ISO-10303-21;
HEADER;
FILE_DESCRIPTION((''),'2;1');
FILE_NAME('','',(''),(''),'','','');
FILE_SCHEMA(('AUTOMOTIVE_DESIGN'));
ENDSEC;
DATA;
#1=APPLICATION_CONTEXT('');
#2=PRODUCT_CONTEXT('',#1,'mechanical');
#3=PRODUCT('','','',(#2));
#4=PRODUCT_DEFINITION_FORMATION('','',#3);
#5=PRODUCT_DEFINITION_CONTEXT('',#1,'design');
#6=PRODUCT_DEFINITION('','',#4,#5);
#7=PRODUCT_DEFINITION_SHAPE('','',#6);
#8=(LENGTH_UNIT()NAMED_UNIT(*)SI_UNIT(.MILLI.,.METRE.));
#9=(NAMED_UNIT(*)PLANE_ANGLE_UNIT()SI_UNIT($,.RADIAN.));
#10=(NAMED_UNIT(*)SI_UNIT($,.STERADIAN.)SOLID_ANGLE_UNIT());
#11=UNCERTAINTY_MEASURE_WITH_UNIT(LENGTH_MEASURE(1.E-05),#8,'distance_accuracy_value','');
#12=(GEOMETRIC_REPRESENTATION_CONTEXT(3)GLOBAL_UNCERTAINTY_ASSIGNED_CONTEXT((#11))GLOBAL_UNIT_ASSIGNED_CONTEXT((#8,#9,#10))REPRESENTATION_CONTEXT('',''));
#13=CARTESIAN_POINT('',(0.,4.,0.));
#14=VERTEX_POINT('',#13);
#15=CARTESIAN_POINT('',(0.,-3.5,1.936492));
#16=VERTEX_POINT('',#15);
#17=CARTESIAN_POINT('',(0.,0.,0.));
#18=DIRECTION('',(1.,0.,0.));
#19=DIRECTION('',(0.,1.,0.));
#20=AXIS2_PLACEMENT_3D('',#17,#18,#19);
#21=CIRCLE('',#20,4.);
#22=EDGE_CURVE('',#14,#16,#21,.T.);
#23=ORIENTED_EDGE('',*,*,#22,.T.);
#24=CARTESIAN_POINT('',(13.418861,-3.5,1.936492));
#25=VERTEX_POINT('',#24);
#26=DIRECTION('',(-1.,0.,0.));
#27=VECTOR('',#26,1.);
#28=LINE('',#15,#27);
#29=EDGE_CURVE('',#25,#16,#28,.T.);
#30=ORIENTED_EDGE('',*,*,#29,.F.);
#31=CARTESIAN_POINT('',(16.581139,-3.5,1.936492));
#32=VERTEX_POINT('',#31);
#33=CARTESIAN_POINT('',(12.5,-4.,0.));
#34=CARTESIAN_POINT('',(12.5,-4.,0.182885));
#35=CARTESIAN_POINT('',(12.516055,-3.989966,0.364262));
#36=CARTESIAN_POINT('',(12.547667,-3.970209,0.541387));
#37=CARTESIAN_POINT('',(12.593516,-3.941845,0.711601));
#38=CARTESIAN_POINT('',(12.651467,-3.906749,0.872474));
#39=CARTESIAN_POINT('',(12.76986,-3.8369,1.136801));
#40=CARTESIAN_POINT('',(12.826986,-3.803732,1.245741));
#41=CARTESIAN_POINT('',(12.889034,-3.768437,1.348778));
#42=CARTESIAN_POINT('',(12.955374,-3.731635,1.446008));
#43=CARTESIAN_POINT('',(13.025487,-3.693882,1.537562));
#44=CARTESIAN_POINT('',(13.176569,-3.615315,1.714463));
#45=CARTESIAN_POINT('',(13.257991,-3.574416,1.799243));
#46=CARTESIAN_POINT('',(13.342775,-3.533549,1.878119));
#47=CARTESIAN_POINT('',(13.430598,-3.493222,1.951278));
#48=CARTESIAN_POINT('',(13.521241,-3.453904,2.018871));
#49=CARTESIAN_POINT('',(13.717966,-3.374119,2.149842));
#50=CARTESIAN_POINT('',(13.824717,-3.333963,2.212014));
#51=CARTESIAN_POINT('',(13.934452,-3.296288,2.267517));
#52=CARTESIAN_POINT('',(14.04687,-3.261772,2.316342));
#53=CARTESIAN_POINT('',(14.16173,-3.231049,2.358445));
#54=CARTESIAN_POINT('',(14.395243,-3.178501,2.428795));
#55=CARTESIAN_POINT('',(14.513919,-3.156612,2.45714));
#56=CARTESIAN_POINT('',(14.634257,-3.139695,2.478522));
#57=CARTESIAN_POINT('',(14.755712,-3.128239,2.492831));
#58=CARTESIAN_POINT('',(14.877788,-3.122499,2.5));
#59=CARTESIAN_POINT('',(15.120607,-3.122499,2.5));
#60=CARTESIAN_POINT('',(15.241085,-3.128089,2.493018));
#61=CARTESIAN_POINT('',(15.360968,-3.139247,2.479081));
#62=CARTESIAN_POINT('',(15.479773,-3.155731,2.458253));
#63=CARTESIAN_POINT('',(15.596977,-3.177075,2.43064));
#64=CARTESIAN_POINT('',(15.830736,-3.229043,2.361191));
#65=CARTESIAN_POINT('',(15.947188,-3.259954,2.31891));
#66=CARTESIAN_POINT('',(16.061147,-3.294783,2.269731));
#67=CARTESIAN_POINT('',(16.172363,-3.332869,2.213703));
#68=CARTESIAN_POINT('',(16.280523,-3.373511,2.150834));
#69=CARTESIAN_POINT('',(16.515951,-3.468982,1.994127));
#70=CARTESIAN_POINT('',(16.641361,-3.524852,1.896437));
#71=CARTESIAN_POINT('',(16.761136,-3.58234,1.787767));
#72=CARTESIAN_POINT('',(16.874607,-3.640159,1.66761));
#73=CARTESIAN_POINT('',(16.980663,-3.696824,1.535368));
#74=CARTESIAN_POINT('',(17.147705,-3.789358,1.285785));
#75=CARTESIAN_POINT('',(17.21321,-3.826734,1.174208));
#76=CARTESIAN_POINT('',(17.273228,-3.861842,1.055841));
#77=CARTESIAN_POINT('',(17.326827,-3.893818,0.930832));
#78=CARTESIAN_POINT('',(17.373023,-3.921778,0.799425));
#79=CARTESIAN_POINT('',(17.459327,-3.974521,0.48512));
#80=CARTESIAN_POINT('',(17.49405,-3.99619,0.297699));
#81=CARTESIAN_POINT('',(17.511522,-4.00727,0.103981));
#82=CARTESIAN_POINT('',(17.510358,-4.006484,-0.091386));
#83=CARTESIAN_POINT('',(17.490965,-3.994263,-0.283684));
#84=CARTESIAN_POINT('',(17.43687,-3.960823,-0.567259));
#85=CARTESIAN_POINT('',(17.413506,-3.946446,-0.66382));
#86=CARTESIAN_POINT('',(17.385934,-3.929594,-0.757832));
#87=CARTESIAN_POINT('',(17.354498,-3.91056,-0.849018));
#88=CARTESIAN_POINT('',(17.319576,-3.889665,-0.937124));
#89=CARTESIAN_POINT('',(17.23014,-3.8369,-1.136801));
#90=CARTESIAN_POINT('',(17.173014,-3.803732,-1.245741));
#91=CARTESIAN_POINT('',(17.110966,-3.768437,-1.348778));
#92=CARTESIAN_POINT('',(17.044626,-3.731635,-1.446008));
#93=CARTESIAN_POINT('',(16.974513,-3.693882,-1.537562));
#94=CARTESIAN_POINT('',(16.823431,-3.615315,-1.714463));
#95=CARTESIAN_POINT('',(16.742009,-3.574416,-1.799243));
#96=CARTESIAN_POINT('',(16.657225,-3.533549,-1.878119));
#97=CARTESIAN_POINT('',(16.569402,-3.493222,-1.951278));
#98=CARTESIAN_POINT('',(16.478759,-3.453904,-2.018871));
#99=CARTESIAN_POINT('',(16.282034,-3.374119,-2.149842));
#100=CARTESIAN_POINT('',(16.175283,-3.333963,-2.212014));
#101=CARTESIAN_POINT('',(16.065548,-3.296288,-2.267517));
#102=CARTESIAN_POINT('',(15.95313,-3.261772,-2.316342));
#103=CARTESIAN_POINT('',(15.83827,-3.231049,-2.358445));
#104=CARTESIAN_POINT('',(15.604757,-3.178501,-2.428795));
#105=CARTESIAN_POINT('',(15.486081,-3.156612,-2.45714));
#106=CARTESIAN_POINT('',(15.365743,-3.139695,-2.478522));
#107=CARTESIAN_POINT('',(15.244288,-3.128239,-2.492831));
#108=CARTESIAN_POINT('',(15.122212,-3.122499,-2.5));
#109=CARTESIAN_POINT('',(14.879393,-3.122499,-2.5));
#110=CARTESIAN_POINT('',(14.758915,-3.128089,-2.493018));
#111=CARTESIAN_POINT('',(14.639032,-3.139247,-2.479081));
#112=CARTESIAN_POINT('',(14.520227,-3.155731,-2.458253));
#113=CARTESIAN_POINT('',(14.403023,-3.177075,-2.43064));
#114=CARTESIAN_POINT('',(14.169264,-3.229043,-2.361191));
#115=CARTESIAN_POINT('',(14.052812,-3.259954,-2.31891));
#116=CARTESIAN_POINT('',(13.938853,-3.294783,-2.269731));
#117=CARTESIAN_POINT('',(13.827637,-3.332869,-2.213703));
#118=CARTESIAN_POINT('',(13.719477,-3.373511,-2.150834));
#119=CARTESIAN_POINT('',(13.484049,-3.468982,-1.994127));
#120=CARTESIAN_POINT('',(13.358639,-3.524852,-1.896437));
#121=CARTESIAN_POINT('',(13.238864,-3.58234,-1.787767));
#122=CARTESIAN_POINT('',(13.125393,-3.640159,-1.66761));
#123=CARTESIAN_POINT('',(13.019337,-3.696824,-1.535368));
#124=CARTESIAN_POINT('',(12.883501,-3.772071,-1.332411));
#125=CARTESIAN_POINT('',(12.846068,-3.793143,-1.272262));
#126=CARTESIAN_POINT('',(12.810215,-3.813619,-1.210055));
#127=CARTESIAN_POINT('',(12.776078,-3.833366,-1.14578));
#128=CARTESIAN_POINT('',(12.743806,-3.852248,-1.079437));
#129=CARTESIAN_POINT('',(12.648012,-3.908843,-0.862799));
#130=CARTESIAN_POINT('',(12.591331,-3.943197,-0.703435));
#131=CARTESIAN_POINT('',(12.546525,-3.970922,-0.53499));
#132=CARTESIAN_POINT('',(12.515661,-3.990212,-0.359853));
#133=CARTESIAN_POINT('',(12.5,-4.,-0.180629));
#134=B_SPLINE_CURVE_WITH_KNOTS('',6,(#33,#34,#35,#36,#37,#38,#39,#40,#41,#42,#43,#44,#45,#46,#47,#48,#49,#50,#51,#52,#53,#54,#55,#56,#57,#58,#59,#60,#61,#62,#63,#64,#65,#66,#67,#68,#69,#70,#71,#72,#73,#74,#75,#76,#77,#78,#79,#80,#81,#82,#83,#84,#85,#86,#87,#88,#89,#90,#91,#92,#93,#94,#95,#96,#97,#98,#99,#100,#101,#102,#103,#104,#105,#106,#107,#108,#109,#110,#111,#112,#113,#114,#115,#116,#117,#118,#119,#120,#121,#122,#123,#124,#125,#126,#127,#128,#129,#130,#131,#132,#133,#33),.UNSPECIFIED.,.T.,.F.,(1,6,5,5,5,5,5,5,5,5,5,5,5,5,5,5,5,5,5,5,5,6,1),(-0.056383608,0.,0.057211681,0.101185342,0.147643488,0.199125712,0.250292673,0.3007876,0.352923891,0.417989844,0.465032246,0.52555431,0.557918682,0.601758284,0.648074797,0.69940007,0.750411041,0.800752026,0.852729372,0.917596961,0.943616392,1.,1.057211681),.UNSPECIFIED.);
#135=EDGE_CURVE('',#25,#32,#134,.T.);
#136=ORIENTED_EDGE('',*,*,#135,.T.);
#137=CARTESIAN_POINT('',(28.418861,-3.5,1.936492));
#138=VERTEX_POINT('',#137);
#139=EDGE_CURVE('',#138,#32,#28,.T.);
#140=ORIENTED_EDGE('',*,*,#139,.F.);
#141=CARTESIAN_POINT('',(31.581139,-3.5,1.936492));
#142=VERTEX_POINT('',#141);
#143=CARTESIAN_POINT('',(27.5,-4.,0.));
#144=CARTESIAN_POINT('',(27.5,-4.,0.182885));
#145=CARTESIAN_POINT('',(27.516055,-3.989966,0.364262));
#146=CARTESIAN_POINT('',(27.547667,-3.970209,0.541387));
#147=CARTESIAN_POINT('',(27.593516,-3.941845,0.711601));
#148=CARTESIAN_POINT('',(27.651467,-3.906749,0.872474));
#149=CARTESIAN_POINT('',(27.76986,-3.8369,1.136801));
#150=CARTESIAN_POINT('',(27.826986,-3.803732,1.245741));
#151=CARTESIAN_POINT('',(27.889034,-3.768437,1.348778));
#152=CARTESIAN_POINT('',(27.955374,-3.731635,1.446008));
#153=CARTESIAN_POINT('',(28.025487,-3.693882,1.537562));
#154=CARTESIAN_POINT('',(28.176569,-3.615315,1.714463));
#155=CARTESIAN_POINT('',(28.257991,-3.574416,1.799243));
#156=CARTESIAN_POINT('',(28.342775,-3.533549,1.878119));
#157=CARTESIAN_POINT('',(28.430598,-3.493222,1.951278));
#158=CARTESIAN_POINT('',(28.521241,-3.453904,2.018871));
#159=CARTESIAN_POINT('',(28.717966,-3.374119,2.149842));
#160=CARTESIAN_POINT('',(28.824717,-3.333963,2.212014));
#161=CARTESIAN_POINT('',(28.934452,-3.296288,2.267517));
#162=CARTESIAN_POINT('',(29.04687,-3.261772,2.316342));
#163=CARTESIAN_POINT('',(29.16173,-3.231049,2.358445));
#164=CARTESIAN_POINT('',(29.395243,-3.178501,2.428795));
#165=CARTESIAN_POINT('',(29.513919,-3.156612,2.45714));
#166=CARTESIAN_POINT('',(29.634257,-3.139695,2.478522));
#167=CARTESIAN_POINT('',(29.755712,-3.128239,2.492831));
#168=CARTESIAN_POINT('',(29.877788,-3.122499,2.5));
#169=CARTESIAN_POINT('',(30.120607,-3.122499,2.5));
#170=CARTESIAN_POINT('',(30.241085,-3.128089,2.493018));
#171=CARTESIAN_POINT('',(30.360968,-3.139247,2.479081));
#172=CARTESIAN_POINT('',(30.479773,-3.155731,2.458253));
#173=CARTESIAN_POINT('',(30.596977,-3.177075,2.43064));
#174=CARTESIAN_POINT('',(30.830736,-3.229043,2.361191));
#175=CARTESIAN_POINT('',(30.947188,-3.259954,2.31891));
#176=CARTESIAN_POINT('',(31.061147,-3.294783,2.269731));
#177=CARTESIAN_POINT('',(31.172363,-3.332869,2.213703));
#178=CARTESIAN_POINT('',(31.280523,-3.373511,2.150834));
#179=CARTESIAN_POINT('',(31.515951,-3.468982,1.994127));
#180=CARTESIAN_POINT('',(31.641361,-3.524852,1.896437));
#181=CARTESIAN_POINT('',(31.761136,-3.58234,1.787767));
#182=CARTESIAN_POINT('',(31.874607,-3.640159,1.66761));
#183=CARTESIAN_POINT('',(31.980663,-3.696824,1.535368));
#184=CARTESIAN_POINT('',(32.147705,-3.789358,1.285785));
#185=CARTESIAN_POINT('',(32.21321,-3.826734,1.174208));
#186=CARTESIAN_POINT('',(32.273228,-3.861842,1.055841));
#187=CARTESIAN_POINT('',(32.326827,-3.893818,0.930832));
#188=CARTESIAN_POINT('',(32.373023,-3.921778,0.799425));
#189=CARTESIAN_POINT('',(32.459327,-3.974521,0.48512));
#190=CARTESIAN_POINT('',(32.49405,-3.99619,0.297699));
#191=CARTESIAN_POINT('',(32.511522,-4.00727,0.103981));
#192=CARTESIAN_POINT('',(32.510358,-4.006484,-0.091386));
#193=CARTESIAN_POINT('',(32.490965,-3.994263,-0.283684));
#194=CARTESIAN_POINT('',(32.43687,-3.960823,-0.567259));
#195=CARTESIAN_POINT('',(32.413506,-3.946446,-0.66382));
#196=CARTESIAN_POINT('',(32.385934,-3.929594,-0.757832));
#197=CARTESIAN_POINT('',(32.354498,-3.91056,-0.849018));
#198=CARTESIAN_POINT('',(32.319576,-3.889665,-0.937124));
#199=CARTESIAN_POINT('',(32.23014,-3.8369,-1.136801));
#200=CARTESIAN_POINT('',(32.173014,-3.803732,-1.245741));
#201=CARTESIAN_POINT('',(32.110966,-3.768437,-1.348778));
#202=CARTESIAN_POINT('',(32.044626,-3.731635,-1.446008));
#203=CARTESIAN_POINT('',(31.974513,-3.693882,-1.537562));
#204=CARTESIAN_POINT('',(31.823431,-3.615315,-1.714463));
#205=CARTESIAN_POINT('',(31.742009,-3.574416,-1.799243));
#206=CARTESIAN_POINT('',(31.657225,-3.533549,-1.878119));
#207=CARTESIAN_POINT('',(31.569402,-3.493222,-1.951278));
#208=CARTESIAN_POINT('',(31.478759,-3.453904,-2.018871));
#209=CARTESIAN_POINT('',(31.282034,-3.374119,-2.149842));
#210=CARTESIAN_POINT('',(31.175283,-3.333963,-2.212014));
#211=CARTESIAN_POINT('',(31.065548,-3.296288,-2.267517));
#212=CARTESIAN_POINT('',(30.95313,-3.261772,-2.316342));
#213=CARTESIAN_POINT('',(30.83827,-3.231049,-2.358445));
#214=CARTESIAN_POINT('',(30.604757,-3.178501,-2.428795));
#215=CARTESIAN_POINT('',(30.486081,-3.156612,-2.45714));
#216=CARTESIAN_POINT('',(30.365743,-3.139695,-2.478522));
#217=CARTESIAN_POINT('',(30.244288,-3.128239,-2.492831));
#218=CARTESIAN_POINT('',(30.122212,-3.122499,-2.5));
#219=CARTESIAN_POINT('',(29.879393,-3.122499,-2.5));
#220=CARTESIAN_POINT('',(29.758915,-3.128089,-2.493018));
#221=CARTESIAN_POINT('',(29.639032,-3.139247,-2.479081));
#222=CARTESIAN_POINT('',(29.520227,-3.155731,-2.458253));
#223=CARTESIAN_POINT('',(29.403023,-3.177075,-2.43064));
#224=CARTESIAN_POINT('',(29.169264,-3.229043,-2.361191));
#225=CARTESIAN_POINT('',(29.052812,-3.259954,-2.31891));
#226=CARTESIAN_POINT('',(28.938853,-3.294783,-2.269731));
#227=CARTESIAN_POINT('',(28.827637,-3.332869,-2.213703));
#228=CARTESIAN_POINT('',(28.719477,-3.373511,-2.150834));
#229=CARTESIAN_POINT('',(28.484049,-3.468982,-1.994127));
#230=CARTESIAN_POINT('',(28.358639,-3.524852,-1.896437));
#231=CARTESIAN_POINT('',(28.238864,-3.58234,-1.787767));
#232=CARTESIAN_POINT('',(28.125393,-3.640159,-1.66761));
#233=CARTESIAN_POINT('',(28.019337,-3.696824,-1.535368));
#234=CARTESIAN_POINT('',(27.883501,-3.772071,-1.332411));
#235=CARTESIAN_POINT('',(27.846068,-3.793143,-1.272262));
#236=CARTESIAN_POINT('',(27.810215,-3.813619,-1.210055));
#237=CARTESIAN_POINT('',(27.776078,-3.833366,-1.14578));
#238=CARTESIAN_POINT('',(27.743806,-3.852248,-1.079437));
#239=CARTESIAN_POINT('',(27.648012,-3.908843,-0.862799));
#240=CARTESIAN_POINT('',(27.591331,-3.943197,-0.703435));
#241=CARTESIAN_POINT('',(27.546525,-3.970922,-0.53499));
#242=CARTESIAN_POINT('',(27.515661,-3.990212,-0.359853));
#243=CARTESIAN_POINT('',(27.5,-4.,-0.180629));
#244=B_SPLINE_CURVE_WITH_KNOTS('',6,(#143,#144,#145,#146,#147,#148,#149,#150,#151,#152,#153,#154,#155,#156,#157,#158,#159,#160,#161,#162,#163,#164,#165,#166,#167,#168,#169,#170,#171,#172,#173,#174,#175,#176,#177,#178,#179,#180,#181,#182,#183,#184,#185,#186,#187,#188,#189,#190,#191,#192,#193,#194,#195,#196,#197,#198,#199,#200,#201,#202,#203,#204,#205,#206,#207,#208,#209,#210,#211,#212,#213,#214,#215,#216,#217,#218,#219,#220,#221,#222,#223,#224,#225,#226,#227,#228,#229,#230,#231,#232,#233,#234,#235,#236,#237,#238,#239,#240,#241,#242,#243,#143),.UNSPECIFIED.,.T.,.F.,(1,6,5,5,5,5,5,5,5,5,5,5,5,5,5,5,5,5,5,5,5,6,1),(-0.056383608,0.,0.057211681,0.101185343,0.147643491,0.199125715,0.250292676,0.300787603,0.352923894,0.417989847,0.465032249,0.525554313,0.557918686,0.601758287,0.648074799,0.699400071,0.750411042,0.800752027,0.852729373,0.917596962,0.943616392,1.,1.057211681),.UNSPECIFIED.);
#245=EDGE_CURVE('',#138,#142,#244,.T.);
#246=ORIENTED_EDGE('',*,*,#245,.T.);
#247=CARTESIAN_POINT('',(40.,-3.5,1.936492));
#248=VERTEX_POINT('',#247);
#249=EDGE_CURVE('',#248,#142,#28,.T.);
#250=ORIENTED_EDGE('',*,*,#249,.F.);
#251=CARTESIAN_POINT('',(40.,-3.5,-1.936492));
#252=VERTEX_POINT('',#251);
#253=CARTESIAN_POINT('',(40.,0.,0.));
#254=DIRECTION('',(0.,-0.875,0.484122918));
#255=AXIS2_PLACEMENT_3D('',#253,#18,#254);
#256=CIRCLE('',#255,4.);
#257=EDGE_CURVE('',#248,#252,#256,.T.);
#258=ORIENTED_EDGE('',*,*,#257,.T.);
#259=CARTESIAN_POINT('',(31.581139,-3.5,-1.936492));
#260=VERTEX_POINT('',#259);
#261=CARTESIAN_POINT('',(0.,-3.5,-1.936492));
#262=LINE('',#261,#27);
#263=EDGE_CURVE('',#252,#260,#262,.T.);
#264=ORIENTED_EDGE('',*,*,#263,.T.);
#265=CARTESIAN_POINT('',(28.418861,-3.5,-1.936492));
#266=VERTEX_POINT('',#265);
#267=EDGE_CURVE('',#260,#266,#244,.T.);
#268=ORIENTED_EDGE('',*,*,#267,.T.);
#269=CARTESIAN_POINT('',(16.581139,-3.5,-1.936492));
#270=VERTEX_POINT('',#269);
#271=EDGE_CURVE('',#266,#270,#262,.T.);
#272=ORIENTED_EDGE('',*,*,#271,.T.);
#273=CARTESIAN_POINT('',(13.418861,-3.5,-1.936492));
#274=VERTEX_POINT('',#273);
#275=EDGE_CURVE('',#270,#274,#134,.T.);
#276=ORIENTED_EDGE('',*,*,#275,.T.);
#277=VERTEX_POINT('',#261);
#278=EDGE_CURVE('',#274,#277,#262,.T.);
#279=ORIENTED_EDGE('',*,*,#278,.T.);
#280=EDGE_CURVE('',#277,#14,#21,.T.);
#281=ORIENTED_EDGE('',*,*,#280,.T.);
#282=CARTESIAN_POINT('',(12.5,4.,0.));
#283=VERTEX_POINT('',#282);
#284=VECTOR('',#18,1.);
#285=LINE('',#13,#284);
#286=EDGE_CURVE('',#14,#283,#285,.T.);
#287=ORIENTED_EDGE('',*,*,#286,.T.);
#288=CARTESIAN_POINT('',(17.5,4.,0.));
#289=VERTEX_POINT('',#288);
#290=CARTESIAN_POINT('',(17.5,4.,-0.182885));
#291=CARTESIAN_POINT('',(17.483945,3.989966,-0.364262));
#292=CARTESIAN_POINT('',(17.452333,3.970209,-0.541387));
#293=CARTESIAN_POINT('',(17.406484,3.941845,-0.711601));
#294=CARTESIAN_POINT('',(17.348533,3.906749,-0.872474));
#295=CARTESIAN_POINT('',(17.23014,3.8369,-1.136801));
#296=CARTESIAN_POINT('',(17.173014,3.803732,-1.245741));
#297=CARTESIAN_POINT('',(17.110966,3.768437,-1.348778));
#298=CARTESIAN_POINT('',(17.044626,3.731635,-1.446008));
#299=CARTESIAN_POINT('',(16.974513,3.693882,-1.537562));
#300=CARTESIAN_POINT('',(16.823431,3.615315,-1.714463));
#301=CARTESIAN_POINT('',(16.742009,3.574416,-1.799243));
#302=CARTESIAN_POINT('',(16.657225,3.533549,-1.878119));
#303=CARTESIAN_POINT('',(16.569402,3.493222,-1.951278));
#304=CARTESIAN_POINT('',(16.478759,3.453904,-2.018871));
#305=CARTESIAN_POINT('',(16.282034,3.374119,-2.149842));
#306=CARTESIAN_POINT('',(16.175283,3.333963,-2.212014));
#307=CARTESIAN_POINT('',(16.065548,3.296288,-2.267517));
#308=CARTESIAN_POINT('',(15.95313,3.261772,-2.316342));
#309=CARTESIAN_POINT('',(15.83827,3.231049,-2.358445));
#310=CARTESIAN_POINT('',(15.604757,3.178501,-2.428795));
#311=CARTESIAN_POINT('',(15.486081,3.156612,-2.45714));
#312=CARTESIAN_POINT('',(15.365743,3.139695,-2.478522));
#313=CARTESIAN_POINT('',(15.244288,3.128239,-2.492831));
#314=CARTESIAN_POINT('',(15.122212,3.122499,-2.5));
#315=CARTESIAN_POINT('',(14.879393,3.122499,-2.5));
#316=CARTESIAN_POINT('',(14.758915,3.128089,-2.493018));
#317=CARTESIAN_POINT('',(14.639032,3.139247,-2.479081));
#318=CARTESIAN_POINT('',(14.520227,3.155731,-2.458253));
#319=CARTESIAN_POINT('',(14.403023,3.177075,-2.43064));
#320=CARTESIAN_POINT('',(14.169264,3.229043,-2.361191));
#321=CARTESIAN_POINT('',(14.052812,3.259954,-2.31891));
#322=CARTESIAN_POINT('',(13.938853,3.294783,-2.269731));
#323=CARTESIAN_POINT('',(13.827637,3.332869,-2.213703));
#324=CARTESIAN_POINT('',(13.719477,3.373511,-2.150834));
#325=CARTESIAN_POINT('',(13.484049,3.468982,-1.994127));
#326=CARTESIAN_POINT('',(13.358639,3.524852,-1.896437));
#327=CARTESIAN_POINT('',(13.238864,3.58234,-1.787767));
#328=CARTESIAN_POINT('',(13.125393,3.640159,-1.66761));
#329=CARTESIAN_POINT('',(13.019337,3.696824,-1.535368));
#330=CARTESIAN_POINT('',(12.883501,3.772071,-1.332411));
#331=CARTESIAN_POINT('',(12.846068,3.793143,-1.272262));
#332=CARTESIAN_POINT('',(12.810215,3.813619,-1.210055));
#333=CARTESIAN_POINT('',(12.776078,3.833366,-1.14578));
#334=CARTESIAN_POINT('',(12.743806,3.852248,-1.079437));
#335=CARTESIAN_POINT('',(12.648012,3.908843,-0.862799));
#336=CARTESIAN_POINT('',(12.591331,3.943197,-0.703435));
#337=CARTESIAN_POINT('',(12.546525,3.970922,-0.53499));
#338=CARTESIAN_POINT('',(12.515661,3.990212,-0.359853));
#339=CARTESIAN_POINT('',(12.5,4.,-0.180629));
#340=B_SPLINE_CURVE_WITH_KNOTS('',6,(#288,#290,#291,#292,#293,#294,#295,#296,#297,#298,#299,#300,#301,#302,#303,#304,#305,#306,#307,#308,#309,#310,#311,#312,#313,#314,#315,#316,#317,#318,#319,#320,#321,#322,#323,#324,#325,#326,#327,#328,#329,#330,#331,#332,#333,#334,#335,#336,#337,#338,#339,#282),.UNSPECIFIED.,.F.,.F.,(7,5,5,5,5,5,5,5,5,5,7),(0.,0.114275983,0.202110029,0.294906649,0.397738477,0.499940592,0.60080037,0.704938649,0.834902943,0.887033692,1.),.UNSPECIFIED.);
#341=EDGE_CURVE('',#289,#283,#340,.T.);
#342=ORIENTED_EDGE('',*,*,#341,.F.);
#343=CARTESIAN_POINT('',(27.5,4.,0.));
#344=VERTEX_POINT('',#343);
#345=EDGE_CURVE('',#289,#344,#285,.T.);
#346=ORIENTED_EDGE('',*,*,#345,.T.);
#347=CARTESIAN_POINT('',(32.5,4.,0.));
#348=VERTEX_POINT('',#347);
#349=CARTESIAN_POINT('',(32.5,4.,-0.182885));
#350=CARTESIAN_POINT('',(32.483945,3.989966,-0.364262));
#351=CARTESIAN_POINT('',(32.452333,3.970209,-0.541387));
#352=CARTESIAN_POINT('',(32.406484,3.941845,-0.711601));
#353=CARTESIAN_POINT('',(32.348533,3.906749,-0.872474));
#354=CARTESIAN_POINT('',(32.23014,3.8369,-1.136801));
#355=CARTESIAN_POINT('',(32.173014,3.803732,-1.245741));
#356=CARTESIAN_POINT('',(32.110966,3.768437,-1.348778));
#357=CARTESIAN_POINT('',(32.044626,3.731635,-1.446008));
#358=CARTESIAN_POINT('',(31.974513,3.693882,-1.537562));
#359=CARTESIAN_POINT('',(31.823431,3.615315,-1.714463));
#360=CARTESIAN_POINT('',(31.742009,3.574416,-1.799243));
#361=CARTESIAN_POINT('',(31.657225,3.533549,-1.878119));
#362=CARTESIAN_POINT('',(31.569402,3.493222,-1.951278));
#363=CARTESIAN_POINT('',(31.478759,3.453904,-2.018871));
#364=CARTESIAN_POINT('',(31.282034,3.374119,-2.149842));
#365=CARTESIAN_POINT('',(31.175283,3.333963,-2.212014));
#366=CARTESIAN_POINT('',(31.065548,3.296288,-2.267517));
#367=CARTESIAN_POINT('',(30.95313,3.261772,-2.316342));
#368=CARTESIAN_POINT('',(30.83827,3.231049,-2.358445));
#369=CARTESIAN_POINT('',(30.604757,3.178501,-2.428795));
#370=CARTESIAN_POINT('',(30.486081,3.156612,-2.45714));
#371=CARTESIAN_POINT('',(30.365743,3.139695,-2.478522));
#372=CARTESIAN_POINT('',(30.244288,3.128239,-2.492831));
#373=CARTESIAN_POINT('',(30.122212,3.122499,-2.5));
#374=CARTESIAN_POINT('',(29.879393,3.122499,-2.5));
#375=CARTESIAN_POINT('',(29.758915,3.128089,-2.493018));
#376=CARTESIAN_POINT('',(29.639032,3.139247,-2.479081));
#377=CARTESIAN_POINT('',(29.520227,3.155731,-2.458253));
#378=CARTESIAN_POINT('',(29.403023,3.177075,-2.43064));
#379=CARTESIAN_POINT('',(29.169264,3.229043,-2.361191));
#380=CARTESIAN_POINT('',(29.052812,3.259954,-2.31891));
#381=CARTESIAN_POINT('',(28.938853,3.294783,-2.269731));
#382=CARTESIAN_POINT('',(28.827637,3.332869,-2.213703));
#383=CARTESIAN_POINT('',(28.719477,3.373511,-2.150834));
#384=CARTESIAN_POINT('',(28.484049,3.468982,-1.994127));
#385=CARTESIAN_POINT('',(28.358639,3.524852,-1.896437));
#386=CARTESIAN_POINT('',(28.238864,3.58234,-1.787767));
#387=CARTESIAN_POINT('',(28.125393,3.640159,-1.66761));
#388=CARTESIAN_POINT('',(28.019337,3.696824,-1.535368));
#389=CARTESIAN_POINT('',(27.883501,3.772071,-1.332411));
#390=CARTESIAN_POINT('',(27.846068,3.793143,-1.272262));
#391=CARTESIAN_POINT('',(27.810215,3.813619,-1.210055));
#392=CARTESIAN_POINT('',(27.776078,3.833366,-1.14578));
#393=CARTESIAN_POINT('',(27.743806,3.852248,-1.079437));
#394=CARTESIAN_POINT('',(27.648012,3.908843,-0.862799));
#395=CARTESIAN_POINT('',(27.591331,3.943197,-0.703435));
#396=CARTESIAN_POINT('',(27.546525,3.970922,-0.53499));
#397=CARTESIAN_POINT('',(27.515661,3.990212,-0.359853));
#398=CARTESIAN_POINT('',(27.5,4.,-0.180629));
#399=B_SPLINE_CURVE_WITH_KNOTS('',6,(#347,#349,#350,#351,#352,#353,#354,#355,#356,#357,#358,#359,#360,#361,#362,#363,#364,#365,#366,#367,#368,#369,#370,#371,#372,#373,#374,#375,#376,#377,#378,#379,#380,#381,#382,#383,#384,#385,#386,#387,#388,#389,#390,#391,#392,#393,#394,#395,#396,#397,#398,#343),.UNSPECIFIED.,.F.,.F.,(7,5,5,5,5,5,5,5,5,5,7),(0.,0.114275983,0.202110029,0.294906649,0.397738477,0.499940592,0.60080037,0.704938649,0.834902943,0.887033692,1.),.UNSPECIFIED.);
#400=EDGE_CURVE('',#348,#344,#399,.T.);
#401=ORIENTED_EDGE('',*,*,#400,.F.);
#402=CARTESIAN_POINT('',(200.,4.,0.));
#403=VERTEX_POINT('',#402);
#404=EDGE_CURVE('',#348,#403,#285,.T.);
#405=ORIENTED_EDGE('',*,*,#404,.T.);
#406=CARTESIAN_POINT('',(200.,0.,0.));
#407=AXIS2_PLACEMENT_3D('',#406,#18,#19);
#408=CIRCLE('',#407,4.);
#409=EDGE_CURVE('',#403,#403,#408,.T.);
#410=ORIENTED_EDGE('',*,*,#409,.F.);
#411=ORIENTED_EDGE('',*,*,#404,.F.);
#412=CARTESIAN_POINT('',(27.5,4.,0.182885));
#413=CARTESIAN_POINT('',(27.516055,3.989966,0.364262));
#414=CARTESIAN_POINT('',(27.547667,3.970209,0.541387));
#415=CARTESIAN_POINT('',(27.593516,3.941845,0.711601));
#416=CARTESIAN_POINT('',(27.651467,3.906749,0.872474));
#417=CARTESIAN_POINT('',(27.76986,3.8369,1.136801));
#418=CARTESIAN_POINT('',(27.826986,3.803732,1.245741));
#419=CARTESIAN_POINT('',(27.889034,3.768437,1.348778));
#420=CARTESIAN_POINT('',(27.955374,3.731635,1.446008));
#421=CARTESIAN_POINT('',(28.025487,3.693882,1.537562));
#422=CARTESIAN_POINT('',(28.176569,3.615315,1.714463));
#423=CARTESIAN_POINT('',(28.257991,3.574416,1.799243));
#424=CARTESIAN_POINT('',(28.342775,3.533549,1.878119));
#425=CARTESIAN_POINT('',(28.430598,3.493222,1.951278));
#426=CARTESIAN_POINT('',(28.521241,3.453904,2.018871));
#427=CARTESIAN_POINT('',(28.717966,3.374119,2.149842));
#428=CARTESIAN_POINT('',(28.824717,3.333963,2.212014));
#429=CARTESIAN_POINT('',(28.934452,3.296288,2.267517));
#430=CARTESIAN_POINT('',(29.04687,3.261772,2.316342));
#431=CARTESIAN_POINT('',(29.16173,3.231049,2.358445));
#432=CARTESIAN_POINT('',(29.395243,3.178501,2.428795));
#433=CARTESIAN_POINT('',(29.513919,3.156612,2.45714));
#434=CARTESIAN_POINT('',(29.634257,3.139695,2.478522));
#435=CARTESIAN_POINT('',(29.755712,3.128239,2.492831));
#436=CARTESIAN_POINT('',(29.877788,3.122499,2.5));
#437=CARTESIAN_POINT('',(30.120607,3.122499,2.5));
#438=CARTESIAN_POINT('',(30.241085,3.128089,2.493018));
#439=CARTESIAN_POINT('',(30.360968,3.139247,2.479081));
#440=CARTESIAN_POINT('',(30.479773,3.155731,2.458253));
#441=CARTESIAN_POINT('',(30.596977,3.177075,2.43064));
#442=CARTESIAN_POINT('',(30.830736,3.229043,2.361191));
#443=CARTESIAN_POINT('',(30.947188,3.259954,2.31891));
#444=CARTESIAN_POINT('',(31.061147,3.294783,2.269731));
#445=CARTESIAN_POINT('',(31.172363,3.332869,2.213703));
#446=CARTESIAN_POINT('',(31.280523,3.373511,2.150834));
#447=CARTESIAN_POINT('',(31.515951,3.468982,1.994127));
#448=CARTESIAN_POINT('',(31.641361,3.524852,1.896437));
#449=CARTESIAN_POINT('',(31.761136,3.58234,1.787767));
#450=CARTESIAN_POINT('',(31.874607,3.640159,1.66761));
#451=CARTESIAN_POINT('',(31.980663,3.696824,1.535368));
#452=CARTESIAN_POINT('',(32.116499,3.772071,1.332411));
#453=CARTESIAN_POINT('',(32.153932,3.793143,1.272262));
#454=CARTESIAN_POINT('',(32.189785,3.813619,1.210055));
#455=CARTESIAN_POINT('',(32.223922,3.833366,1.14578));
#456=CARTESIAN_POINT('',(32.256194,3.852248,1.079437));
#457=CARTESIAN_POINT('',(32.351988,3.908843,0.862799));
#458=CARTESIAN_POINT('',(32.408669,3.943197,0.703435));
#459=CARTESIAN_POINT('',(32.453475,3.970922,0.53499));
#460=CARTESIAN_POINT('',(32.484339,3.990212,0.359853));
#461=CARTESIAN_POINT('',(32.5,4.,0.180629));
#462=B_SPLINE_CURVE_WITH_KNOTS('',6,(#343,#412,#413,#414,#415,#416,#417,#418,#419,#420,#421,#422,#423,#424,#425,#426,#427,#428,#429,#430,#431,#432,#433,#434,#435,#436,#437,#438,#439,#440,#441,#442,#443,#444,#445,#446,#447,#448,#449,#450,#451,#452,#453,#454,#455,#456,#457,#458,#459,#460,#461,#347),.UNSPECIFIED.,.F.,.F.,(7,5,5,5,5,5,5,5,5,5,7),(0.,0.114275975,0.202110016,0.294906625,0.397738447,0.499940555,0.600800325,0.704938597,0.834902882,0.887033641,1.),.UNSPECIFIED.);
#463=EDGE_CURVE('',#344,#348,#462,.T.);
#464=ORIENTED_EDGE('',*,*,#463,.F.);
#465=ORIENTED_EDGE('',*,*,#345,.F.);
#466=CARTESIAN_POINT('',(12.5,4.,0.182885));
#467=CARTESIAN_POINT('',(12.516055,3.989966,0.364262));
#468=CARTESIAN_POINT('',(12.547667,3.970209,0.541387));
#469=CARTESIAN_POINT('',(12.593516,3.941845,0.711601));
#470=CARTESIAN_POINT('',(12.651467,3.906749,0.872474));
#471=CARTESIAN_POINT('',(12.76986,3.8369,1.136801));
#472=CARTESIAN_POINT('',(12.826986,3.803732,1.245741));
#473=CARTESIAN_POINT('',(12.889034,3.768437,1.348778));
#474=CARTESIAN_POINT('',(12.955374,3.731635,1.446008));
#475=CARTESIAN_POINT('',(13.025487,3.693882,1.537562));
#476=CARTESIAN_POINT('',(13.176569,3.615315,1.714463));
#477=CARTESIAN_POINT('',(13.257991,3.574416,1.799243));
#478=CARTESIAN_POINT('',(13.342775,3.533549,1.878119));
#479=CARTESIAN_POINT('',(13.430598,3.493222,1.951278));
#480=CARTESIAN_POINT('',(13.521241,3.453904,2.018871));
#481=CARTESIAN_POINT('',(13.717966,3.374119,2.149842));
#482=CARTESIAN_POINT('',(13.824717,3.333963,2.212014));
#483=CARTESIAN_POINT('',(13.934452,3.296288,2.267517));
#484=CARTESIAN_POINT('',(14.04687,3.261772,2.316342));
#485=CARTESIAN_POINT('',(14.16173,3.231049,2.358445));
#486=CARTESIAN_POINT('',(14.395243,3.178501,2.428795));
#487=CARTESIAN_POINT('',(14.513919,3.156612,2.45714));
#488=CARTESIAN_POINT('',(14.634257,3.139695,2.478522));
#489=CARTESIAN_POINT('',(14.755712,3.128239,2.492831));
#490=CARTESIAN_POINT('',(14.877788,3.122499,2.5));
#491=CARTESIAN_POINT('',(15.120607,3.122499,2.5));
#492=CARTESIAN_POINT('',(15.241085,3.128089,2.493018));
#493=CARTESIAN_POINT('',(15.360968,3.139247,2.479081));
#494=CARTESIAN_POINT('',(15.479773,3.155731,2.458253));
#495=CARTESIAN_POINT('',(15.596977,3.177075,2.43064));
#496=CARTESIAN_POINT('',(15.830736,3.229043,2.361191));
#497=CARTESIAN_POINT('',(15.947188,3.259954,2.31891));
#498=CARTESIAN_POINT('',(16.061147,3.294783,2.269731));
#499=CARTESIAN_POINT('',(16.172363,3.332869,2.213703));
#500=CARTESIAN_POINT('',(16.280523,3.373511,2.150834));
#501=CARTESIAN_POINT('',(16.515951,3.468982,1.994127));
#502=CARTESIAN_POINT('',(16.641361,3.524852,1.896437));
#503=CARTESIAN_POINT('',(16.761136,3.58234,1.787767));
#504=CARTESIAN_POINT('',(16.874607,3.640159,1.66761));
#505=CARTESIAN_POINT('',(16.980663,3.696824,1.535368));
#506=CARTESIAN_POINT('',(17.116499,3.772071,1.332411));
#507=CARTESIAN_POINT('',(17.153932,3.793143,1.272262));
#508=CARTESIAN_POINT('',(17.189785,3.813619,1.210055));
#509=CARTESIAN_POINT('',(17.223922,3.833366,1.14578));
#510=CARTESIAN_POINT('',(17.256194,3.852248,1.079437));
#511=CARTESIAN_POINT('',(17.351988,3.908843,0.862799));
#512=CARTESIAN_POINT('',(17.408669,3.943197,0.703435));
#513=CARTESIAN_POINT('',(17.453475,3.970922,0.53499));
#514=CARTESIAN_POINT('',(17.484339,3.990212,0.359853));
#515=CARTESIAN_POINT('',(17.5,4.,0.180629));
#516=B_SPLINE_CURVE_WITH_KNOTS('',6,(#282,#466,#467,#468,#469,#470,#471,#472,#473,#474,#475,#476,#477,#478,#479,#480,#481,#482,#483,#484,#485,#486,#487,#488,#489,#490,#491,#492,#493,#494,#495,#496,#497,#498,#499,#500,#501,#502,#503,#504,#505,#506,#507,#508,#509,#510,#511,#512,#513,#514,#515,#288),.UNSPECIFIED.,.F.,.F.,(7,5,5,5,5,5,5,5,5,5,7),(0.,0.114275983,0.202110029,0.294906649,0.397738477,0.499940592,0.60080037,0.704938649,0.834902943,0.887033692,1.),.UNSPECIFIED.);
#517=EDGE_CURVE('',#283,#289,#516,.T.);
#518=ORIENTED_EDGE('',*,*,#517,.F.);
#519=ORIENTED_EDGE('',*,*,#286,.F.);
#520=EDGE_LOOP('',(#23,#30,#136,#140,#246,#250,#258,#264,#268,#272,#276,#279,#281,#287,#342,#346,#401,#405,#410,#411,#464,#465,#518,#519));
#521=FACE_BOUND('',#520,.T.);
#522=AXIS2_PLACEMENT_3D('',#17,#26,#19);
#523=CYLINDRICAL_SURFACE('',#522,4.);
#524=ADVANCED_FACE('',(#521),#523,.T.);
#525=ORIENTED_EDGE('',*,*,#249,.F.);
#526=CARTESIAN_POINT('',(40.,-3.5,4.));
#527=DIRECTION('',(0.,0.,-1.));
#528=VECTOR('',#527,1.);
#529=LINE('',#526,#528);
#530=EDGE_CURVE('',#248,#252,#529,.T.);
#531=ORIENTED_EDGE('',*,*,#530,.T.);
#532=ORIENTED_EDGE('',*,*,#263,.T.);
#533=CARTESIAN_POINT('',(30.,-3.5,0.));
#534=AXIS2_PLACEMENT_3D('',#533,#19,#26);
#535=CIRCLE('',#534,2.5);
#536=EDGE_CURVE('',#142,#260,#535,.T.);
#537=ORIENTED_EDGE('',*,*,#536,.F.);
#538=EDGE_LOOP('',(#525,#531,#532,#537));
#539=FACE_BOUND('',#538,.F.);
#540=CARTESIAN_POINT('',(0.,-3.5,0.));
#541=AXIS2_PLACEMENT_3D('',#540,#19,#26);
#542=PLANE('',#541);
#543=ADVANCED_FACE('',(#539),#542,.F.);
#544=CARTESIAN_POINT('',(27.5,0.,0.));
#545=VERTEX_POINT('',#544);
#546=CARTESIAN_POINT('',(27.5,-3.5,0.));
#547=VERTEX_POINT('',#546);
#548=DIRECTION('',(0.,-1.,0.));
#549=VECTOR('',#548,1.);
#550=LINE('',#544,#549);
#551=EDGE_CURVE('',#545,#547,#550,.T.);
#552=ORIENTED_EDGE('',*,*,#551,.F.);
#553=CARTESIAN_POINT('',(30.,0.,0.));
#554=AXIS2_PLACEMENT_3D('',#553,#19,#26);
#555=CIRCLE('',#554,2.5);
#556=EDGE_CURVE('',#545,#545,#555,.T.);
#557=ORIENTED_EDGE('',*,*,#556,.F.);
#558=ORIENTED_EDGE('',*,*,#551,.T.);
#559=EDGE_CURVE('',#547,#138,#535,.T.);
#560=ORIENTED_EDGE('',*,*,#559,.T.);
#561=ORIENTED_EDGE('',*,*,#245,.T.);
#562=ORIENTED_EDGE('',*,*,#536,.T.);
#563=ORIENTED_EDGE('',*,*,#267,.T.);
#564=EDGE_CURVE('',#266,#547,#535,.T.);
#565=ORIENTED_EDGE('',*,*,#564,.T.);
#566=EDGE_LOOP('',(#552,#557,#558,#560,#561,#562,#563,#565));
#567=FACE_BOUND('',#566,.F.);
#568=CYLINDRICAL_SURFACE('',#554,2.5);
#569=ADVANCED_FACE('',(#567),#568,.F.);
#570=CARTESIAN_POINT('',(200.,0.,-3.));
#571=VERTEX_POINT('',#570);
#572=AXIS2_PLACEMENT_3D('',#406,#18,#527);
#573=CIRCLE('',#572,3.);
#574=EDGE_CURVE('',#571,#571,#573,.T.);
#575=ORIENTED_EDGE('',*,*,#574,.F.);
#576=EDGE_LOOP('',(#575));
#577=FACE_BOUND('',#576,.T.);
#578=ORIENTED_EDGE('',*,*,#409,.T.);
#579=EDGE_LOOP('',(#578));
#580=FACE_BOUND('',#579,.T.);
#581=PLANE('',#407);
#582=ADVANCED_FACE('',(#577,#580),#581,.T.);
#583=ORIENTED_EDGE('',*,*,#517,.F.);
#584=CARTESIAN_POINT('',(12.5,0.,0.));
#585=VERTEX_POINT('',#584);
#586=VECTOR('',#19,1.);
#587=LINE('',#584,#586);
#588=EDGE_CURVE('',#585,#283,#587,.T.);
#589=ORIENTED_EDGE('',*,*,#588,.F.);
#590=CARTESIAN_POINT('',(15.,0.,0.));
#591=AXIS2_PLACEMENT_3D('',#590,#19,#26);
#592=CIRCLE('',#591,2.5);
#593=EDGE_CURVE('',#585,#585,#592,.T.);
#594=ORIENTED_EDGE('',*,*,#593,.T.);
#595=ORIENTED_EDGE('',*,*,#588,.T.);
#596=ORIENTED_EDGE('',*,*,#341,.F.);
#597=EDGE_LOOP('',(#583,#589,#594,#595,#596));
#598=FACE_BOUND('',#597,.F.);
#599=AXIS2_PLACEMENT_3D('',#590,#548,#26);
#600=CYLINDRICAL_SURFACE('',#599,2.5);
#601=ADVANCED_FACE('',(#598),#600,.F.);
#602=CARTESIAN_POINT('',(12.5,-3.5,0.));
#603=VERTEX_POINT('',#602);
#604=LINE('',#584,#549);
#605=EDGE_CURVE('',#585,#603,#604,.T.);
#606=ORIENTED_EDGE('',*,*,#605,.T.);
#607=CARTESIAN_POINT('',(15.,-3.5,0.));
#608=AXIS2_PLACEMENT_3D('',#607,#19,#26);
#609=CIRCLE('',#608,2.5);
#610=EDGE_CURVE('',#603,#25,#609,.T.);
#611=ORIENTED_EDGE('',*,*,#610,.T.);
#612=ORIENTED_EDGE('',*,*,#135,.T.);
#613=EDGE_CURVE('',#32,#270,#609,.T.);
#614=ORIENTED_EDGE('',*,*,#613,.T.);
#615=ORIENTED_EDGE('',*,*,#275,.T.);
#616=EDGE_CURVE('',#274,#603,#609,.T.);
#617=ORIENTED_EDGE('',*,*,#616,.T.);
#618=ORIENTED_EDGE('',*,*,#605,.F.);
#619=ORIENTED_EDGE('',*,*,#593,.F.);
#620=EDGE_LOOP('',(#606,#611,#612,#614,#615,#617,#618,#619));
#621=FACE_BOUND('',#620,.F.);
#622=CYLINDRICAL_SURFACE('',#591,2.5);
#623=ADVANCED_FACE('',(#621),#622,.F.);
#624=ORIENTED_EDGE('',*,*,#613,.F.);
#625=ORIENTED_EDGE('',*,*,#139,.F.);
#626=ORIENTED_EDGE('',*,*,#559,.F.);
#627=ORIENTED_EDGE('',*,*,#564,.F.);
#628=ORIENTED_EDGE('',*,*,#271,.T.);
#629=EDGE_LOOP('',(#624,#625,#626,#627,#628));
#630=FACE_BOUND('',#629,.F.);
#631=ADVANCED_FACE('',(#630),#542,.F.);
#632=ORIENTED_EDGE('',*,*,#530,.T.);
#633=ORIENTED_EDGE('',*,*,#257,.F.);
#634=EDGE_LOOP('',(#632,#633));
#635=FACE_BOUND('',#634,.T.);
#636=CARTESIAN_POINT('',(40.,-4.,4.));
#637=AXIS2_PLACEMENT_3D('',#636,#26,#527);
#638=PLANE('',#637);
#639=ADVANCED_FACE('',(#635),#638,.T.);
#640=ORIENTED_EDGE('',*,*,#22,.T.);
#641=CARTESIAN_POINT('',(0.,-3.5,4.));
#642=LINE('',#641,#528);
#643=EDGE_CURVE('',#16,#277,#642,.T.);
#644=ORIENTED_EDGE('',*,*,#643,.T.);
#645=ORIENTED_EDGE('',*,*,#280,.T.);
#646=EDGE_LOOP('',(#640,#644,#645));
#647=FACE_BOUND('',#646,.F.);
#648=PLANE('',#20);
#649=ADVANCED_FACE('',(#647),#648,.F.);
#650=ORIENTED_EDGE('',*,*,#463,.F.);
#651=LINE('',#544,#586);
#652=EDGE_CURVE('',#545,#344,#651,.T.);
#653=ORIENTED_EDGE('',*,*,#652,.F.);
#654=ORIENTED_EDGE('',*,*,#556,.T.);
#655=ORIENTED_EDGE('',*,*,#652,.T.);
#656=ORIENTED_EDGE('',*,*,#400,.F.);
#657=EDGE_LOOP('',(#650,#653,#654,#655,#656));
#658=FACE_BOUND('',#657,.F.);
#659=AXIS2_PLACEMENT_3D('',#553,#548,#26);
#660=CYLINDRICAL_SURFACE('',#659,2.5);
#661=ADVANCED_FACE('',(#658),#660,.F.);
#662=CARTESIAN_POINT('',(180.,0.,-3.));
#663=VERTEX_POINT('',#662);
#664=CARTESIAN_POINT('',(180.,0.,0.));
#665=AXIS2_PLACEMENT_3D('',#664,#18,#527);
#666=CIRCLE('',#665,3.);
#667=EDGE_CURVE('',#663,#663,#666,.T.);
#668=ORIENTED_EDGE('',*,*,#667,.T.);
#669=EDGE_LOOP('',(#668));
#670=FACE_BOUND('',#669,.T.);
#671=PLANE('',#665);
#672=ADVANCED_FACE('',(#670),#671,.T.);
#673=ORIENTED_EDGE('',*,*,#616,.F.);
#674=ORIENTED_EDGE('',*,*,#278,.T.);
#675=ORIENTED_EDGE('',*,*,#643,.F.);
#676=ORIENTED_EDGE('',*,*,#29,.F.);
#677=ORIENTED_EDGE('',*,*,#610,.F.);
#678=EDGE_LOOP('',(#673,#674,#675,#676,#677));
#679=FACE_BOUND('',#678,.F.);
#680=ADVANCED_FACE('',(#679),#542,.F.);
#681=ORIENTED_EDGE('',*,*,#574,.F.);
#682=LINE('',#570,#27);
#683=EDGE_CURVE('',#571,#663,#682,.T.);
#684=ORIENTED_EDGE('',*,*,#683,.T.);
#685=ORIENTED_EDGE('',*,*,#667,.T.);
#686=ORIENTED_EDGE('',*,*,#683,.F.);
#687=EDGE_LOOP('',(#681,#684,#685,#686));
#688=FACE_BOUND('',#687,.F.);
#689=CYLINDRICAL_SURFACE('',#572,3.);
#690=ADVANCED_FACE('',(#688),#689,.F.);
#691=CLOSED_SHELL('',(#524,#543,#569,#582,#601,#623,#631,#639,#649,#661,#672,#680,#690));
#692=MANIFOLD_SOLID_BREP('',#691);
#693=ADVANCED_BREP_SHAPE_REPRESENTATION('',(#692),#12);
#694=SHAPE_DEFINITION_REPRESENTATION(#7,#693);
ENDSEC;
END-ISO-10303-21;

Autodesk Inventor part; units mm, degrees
ref_plane "YZ Plane" through (0, 0, 0) normal (1, 0, 0) x (0, 1, 0)
ref_plane "XY Plane" through (0, 0, 0) normal (0, 0, 1) x (1, 0, 0)
sketch "Sketch1" plane through (0, 0, 0) normal (1, 0, 0) x (0, 1, 0)
  circle A0 centre (0, 0) radius 4
  dimension "d0" = 8
extrude "Extrusion1" add sketch "Sketch1" along normal blind 200
sketch "Sketch2" plane through (0, 0, 0) normal (0, 1, 0) x (-1, 0, 0)
  line L0 (0, 0) -> (-15, 0)
  line L1 (-15, 0) -> (-30, 0)
  circle A0 centre (-30, 0) radius 2.5
  circle A1 centre (-15, 0) radius 2.5
  dimension "d3" = 15
  dimension "d4" = 15
  dimension "d5" = 5
  dimension "d6" = 5
extrude "Extrusion2" cut sketch "Sketch2" along normal mid plane 200
sketch "Sketch3" plane through (200, 0, 0) normal (1, 0, 0) x (0, 0, -1)
  circle A0 centre (0, 0) radius 3
  dimension "d9" = 6
extrude "Extrusion3" cut sketch "Sketch3" against normal blind 20
thread "Thread1" size "M6x1" class "6H" standard "ANSI Metric M Profile" length 15
ref_plane "Work Plane2" through (0, -4, 0) normal (0, 1, 0) x (-1, 0, 0)
sketch "Sketch4" plane through (0, -4, 0) normal (0, 1, 0) x (-1, 0, 0)
  line L0 (0, 4) -> (0, -4) projected
  line L1 (0, -4) -> (-200, -4) projected
  line L2 (0, 4) -> (-40, 4)
  line L3 (-40, 4) -> (-40, -4)
  line L4 (-40, -4) -> (0, -4)
  line L5 (0, -4) -> (0, 4)
  point P0 (0, 0)
  dimension "d16" = 40
extrude "Extrusion4" cut sketch "Sketch4" along normal blind 0.5
properties part number "counterweight-rod" material "Aluminum 6061"
